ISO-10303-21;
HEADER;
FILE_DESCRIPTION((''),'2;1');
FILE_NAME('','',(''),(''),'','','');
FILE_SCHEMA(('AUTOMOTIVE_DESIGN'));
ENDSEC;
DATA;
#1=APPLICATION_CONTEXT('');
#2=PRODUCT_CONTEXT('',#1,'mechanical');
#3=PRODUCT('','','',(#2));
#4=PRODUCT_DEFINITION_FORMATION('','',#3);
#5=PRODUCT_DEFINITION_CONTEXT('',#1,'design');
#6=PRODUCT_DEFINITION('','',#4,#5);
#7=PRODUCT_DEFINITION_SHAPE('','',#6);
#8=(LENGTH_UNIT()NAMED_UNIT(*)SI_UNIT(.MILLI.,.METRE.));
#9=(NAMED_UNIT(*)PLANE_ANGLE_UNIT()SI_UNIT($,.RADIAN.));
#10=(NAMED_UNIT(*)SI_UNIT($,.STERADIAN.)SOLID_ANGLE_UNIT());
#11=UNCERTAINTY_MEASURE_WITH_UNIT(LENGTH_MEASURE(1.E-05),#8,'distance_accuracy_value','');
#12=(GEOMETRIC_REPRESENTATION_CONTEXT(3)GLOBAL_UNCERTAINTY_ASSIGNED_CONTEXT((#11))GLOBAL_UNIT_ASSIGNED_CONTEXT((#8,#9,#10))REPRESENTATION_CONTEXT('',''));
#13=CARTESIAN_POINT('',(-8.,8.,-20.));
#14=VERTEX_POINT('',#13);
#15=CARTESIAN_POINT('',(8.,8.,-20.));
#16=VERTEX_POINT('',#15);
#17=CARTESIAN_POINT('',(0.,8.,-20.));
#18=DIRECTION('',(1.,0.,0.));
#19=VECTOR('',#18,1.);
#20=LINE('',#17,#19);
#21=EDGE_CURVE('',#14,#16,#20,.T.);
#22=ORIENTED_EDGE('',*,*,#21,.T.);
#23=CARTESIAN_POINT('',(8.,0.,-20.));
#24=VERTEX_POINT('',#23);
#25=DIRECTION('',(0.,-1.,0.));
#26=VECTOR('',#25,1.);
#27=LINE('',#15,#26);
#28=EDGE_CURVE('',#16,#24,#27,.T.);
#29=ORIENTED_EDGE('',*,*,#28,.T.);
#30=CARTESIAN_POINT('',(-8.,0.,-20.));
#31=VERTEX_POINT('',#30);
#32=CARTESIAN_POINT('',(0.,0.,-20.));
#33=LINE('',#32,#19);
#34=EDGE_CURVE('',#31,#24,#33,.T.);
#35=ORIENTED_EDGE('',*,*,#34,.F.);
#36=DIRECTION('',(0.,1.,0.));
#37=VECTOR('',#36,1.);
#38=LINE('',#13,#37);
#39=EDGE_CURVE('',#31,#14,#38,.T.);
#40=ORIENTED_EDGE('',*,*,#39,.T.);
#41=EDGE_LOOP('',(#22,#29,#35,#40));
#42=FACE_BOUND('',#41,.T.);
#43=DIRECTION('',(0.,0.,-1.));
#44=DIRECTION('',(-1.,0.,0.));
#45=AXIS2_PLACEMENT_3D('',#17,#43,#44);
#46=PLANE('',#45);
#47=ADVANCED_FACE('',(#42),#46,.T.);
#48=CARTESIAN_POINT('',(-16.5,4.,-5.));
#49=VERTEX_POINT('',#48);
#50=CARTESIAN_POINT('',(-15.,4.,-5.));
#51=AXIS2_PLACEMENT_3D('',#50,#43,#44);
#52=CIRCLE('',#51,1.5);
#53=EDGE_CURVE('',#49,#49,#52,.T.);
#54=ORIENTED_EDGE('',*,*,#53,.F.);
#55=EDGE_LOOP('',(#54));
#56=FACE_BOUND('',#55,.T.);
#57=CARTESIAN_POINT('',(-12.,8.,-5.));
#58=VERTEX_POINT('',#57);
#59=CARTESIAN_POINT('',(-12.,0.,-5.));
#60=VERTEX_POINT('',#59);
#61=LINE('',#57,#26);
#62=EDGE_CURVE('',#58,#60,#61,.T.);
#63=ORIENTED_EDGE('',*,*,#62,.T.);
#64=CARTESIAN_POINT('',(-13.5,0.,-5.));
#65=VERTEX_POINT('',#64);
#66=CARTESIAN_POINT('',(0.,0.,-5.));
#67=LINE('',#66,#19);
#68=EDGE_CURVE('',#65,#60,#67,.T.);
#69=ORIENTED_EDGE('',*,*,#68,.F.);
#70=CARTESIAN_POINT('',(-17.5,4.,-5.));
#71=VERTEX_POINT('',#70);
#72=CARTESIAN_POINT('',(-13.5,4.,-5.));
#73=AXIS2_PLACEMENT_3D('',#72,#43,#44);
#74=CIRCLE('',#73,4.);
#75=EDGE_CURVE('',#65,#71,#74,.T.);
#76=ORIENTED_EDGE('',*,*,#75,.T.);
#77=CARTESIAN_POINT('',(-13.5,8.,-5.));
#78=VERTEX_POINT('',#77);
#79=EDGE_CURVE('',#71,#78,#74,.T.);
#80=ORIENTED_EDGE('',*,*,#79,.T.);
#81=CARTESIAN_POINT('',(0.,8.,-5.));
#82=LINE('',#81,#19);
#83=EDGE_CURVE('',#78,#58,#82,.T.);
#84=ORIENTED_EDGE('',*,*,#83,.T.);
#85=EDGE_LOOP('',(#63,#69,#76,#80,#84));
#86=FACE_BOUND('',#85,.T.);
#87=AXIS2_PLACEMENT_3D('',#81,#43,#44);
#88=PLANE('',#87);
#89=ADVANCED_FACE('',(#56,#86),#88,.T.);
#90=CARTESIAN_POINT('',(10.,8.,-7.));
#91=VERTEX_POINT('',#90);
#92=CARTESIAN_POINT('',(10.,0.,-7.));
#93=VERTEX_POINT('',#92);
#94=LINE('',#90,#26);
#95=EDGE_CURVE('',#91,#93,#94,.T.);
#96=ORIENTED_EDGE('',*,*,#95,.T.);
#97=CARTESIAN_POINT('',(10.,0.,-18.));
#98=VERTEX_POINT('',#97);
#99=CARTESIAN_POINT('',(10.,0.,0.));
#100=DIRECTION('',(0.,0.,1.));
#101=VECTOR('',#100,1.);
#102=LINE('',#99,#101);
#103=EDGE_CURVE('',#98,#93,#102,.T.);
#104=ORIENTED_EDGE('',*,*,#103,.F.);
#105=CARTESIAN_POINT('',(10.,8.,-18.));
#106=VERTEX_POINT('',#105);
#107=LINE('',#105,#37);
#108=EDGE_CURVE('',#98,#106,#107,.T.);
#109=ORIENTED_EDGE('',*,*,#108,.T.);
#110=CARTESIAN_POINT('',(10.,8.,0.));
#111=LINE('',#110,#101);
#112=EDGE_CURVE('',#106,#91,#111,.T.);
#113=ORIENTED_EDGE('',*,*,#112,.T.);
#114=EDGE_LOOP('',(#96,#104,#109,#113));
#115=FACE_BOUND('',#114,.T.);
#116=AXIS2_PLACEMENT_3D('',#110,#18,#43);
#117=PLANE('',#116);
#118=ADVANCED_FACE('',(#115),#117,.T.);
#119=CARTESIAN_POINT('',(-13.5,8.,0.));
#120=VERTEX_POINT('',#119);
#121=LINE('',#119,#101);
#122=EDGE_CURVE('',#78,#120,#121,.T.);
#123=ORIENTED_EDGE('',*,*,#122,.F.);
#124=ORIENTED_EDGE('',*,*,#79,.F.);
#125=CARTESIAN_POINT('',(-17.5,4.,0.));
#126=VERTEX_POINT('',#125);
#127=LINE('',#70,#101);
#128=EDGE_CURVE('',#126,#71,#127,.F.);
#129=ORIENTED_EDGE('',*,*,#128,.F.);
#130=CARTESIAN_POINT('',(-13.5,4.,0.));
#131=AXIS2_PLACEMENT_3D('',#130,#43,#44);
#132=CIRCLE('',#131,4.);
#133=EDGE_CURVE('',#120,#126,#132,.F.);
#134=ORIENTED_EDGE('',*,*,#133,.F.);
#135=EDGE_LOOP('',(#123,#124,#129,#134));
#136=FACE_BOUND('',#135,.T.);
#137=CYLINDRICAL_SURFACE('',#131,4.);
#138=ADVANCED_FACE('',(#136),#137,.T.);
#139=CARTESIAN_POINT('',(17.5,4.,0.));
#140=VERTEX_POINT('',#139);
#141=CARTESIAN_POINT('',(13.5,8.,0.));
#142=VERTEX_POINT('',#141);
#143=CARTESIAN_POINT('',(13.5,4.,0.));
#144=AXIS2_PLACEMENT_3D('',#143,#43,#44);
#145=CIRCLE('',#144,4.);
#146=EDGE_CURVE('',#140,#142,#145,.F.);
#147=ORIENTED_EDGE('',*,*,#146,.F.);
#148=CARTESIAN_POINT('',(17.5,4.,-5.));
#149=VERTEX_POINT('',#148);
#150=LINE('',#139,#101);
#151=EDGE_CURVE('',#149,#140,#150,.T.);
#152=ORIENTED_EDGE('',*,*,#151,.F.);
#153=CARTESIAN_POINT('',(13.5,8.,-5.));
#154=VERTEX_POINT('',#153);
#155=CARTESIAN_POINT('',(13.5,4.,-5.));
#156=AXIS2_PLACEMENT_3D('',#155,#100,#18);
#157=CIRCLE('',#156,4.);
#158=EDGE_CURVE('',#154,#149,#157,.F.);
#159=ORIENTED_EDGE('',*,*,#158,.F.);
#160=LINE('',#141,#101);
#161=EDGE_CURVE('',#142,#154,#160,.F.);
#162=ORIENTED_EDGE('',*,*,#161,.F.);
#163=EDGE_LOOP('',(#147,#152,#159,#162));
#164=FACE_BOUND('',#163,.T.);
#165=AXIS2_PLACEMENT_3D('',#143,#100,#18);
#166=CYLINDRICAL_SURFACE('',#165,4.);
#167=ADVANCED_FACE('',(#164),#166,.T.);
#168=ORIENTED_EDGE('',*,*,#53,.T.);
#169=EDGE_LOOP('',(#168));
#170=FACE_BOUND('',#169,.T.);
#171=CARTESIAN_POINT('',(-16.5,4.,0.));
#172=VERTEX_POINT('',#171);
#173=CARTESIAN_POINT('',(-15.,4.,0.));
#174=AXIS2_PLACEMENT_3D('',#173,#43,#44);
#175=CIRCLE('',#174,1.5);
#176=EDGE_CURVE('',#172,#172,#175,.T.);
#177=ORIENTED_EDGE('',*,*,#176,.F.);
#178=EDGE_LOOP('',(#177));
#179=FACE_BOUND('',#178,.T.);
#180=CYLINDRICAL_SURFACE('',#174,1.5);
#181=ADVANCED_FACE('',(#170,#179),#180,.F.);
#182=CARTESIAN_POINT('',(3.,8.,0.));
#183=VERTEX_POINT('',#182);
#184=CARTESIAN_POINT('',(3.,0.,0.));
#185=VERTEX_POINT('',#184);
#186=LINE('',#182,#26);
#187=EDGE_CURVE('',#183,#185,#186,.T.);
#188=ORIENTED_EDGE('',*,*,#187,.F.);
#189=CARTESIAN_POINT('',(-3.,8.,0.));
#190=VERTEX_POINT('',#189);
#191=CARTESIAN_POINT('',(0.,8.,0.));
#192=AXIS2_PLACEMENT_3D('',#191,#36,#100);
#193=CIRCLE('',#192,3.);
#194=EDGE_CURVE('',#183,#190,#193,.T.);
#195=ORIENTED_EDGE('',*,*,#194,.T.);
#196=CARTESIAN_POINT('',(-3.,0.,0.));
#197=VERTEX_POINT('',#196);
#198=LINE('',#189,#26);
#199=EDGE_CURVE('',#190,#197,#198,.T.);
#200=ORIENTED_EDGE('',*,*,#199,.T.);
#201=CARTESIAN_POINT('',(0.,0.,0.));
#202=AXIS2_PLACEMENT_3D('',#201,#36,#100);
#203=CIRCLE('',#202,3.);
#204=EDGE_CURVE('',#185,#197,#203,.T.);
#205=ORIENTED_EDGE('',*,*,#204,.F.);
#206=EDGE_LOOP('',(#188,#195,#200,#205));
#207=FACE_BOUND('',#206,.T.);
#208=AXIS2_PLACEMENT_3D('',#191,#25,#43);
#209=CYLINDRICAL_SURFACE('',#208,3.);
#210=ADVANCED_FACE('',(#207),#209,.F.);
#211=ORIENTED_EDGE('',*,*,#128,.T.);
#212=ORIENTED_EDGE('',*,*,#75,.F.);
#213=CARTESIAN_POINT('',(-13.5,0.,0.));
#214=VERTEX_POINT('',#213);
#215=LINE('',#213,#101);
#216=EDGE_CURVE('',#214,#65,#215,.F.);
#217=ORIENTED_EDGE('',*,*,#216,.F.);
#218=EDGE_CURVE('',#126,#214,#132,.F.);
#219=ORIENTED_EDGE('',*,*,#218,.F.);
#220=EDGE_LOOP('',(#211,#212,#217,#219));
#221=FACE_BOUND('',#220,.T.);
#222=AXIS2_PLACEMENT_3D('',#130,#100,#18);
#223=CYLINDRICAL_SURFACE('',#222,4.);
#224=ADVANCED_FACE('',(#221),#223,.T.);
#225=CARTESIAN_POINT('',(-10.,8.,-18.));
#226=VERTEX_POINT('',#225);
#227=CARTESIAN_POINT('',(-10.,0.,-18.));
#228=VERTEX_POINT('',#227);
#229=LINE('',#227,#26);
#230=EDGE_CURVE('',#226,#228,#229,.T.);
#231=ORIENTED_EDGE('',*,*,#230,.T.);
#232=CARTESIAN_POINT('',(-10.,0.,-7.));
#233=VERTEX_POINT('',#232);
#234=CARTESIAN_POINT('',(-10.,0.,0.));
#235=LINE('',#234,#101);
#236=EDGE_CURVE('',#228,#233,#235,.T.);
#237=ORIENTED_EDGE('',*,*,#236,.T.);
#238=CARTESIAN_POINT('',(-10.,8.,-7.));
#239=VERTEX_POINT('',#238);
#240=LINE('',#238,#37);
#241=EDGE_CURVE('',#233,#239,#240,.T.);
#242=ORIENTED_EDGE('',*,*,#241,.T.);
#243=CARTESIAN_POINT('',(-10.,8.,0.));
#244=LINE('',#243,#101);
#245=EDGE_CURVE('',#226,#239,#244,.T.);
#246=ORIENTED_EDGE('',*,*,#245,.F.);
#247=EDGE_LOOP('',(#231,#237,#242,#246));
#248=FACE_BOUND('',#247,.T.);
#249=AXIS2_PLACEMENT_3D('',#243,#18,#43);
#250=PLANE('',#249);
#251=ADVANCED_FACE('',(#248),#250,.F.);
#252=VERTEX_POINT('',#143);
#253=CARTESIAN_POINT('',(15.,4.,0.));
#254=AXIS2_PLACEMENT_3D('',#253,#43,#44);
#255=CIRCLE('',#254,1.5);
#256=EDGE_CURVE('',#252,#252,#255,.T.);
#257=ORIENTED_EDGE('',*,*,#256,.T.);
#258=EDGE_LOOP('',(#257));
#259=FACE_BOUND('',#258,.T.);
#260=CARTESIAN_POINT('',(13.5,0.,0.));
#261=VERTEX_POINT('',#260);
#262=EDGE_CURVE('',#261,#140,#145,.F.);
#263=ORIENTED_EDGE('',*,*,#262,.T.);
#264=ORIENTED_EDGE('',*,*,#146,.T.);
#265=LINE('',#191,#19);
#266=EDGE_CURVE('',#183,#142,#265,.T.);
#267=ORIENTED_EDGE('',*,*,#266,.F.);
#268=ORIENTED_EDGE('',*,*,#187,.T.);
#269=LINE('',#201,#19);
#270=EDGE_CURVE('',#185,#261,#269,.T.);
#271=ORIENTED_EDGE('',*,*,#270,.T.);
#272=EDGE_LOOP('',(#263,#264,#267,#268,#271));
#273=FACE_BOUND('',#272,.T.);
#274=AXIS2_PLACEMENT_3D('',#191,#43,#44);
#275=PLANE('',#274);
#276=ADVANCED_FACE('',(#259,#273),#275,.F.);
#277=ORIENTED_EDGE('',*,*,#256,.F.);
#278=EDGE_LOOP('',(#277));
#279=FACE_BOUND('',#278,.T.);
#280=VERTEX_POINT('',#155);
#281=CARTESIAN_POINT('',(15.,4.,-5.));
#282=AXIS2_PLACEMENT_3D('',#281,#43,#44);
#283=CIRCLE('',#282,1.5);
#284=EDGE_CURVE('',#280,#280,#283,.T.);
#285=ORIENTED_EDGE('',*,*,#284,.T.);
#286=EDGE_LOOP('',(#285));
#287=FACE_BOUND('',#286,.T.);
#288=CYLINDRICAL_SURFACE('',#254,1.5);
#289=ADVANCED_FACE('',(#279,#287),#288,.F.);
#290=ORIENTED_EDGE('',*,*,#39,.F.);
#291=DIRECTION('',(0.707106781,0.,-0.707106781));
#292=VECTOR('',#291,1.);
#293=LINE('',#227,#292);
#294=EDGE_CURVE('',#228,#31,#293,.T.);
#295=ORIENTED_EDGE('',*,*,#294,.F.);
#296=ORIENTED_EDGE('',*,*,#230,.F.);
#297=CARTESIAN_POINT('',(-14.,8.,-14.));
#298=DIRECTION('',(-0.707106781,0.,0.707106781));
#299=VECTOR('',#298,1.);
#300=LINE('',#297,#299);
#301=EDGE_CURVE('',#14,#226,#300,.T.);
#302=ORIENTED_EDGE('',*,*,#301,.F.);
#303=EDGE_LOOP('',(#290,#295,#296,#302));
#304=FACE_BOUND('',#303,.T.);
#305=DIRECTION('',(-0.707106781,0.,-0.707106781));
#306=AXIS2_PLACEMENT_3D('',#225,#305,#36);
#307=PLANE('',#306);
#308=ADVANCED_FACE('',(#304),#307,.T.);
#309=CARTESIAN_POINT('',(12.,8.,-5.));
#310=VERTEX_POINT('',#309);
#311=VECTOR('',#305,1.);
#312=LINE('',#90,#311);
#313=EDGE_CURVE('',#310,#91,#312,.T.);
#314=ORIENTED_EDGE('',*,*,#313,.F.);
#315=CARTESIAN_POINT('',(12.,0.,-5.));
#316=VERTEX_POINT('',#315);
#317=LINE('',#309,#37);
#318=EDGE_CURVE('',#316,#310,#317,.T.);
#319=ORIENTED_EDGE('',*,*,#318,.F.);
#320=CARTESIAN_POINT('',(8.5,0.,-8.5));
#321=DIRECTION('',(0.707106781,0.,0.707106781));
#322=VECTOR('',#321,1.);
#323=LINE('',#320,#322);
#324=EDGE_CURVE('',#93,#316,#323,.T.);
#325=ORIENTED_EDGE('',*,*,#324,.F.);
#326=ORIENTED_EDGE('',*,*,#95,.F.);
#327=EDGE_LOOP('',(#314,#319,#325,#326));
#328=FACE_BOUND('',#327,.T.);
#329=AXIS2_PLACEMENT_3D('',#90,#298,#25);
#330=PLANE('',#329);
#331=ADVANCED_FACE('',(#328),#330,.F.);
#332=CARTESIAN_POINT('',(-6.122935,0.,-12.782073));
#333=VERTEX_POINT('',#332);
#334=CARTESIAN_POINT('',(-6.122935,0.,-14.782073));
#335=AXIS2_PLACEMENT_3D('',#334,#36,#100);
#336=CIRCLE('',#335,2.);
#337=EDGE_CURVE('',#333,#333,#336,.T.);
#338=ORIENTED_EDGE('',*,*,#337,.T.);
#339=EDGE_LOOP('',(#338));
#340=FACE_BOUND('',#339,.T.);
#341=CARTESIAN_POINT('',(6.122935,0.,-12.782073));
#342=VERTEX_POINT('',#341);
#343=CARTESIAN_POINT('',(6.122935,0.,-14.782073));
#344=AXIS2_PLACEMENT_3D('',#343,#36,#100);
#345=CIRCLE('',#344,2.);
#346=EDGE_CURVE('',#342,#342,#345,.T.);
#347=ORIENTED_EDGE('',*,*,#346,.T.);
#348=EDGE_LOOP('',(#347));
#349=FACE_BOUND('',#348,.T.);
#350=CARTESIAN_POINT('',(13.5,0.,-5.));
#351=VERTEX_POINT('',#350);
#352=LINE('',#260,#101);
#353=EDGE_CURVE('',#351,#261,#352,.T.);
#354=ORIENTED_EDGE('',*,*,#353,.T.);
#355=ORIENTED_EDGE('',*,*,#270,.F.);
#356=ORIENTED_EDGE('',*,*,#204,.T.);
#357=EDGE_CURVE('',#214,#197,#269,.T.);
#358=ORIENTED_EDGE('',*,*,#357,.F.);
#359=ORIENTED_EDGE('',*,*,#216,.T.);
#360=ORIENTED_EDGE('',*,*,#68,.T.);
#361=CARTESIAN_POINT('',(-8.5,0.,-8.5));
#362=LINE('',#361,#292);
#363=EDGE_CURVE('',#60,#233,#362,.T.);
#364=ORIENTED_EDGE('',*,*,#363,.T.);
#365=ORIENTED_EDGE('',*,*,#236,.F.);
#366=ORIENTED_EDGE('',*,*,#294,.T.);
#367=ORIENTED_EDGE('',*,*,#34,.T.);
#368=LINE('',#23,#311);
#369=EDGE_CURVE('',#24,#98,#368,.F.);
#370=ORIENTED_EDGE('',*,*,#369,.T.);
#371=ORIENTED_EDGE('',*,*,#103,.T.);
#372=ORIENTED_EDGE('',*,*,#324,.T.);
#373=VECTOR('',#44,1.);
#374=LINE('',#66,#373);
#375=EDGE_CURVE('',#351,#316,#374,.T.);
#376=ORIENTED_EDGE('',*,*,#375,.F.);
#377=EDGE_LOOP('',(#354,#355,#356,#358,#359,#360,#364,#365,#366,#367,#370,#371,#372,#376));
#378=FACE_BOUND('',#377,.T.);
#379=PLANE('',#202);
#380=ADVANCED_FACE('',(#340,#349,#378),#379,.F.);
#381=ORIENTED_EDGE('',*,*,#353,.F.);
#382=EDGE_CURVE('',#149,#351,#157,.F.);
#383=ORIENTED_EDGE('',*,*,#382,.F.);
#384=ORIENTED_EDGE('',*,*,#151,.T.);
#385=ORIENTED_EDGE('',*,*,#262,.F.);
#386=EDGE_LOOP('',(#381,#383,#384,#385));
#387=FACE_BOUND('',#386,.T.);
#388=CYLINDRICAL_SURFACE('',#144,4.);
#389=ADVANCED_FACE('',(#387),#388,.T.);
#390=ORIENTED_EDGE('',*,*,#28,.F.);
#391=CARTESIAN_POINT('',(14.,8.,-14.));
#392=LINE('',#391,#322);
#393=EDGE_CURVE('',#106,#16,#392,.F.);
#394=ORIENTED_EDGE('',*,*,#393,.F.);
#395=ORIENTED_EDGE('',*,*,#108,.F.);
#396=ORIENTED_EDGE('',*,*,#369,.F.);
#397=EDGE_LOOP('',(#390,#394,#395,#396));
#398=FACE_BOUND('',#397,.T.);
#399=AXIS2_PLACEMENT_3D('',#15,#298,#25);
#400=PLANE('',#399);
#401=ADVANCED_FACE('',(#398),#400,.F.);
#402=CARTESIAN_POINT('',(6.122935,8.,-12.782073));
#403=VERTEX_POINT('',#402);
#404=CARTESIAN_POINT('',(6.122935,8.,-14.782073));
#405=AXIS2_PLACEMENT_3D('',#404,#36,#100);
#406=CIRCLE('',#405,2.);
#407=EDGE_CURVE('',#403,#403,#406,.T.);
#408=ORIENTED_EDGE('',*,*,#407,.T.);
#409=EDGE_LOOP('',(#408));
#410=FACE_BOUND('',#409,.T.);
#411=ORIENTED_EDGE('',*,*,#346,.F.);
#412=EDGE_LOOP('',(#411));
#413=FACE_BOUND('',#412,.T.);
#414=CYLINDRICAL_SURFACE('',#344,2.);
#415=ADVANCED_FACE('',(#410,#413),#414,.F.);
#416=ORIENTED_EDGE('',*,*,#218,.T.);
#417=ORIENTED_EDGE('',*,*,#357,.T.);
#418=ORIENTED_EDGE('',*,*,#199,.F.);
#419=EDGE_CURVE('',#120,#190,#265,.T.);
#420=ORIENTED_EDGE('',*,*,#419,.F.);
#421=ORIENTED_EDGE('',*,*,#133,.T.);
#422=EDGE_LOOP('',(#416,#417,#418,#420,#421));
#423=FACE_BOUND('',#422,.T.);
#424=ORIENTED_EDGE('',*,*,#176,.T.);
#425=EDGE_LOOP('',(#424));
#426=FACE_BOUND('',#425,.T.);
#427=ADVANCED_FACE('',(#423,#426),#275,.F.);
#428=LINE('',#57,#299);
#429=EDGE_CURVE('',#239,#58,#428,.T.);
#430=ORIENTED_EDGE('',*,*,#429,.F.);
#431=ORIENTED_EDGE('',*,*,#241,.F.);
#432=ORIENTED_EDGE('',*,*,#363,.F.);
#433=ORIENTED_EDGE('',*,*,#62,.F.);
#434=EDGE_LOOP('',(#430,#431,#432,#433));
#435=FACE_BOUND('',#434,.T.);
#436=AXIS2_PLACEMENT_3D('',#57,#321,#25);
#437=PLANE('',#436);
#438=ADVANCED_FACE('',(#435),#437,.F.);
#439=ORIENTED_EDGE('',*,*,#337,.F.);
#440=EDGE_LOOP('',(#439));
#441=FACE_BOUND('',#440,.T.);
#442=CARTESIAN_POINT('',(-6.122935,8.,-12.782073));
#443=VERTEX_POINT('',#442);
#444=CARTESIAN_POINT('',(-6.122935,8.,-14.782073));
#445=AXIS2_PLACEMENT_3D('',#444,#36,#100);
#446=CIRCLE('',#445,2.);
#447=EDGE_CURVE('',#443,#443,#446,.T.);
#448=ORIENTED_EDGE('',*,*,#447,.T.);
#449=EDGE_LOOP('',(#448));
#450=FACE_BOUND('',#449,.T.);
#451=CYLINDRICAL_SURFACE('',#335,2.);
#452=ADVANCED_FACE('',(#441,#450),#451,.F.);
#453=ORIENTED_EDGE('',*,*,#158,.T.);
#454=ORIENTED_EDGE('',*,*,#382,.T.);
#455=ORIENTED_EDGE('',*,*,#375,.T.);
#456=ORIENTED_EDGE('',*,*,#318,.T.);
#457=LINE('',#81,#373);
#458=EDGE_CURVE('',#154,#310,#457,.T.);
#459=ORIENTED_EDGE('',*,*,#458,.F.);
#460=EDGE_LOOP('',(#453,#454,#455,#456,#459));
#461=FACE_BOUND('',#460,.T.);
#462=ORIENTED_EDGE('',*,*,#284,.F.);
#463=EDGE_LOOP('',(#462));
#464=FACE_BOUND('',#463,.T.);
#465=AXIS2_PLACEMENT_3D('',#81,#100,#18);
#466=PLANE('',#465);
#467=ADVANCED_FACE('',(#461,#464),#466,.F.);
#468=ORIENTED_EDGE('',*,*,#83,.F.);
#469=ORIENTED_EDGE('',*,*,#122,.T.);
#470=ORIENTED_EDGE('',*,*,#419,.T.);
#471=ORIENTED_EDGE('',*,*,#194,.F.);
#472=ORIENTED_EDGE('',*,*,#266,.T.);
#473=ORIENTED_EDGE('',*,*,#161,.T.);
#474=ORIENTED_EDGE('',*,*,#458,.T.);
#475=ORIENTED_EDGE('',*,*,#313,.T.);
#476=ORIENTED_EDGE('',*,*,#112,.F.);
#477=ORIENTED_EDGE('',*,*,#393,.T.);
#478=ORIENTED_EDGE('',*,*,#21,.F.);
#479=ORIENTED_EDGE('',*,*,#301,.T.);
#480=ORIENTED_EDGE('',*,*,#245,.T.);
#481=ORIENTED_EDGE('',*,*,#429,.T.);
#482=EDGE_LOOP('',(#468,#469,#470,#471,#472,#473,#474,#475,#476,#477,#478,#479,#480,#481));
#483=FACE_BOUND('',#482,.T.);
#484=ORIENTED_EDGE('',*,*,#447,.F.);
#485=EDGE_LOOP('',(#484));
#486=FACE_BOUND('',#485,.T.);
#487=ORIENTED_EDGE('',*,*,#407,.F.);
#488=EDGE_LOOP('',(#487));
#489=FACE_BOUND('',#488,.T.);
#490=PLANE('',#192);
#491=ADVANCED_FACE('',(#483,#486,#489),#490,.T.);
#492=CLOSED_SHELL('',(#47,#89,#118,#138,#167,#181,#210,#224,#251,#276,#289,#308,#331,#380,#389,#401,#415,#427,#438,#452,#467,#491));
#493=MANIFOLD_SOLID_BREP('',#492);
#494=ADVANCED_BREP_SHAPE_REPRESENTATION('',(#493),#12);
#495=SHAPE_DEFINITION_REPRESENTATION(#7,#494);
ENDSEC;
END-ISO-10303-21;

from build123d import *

# Parameters (mm, degrees)
BOSS_EXTRUDE1_DEPTH = 8
CHAMFER1_SIZE       = 2
SKETCH2_R           = 1.5
CUT_EXTRUDE1_DEPTH  = 25.397745798
FILLET1_R           = 4
SKETCH3_R           = 2
CUT_EXTRUDE2_DEPTH  = 28.753378173
CHAMFER2_SIZE       = 2


with BuildPart() as part:
    # Sketch1 → Boss-Extrude1 (new body)
    with BuildSketch(Plane(origin=(0, 0, 0), x_dir=(1, 0, 0), z_dir=(0, 1, 0))):
        with BuildLine():
            Line((10, 20), (-10, 20))
            Line((-10, 20), (-10, 5))
            Line((-10, 5), (-17.5, 5))
            Line((-17.5, 5), (-17.5, 0))
            Line((-17.5, 0), (-3, 0))
            ThreePointArc((-3, 0), (0, 3), (3, 0))
            Line((3, 0), (17.5, 0))
            Line((17.5, 0), (17.5, 5))
            Line((17.5, 5), (10, 5))
            Line((10, 5), (10, 20))
        make_face()
    extrude(amount=BOSS_EXTRUDE1_DEPTH)

    # Chamfer1
    chamfer1_edges = [part.edges().sort_by_distance(p)[0] for p in [
        (-10, 4, -5),
        (10, 4, -5),
    ]]
    chamfer(chamfer1_edges, length=CHAMFER1_SIZE)

    # Sketch2 → Cut-Extrude1 (cut, through all)
    with BuildSketch(Plane(origin=(0, 0, -5), x_dir=(-1, 0, 0), z_dir=(0, 0, -1))):
        with Locations((-15, 4)):
            Circle(SKETCH2_R)
        with Locations((15, 4)):
            Circle(SKETCH2_R)
    extrude(amount=-CUT_EXTRUDE1_DEPTH, mode=Mode.SUBTRACT)

    # Fillet1
    fillet1_edges = [part.edges().sort_by_distance(p)[0] for p in [
        (17.5, 8, -2.5),
        (-17.5, 8, -2.5),
        (17.5, 0, -2.5),
        (-17.5, 0, -2.5),
    ]]
    fillet(fillet1_edges, radius=FILLET1_R - 0.0001)  # a hair under: the kernel refuses the full size

    # Sketch3 → Cut-Extrude2 (cut, through all)
    with BuildSketch(Plane(origin=(0, 8, 0), x_dir=(1, 0, 0), z_dir=(0, 1, 0))):
        with Locations(Location((-6.122934918, 14.78207252, 0), (0, 0, 270))):
            Circle(SKETCH3_R)
        with Locations(Location((6.122934918, 14.78207252, 0), (0, 0, 270))):
            Circle(SKETCH3_R)
    extrude(amount=-CUT_EXTRUDE2_DEPTH, mode=Mode.SUBTRACT)

    # Chamfer2
    chamfer2_edges = [part.edges().sort_by_distance(p)[0] for p in [
        (-10, 4, -20),
        (10, 4, -20),
    ]]
    chamfer(chamfer2_edges, length=CHAMFER2_SIZE)


solid = part.part
